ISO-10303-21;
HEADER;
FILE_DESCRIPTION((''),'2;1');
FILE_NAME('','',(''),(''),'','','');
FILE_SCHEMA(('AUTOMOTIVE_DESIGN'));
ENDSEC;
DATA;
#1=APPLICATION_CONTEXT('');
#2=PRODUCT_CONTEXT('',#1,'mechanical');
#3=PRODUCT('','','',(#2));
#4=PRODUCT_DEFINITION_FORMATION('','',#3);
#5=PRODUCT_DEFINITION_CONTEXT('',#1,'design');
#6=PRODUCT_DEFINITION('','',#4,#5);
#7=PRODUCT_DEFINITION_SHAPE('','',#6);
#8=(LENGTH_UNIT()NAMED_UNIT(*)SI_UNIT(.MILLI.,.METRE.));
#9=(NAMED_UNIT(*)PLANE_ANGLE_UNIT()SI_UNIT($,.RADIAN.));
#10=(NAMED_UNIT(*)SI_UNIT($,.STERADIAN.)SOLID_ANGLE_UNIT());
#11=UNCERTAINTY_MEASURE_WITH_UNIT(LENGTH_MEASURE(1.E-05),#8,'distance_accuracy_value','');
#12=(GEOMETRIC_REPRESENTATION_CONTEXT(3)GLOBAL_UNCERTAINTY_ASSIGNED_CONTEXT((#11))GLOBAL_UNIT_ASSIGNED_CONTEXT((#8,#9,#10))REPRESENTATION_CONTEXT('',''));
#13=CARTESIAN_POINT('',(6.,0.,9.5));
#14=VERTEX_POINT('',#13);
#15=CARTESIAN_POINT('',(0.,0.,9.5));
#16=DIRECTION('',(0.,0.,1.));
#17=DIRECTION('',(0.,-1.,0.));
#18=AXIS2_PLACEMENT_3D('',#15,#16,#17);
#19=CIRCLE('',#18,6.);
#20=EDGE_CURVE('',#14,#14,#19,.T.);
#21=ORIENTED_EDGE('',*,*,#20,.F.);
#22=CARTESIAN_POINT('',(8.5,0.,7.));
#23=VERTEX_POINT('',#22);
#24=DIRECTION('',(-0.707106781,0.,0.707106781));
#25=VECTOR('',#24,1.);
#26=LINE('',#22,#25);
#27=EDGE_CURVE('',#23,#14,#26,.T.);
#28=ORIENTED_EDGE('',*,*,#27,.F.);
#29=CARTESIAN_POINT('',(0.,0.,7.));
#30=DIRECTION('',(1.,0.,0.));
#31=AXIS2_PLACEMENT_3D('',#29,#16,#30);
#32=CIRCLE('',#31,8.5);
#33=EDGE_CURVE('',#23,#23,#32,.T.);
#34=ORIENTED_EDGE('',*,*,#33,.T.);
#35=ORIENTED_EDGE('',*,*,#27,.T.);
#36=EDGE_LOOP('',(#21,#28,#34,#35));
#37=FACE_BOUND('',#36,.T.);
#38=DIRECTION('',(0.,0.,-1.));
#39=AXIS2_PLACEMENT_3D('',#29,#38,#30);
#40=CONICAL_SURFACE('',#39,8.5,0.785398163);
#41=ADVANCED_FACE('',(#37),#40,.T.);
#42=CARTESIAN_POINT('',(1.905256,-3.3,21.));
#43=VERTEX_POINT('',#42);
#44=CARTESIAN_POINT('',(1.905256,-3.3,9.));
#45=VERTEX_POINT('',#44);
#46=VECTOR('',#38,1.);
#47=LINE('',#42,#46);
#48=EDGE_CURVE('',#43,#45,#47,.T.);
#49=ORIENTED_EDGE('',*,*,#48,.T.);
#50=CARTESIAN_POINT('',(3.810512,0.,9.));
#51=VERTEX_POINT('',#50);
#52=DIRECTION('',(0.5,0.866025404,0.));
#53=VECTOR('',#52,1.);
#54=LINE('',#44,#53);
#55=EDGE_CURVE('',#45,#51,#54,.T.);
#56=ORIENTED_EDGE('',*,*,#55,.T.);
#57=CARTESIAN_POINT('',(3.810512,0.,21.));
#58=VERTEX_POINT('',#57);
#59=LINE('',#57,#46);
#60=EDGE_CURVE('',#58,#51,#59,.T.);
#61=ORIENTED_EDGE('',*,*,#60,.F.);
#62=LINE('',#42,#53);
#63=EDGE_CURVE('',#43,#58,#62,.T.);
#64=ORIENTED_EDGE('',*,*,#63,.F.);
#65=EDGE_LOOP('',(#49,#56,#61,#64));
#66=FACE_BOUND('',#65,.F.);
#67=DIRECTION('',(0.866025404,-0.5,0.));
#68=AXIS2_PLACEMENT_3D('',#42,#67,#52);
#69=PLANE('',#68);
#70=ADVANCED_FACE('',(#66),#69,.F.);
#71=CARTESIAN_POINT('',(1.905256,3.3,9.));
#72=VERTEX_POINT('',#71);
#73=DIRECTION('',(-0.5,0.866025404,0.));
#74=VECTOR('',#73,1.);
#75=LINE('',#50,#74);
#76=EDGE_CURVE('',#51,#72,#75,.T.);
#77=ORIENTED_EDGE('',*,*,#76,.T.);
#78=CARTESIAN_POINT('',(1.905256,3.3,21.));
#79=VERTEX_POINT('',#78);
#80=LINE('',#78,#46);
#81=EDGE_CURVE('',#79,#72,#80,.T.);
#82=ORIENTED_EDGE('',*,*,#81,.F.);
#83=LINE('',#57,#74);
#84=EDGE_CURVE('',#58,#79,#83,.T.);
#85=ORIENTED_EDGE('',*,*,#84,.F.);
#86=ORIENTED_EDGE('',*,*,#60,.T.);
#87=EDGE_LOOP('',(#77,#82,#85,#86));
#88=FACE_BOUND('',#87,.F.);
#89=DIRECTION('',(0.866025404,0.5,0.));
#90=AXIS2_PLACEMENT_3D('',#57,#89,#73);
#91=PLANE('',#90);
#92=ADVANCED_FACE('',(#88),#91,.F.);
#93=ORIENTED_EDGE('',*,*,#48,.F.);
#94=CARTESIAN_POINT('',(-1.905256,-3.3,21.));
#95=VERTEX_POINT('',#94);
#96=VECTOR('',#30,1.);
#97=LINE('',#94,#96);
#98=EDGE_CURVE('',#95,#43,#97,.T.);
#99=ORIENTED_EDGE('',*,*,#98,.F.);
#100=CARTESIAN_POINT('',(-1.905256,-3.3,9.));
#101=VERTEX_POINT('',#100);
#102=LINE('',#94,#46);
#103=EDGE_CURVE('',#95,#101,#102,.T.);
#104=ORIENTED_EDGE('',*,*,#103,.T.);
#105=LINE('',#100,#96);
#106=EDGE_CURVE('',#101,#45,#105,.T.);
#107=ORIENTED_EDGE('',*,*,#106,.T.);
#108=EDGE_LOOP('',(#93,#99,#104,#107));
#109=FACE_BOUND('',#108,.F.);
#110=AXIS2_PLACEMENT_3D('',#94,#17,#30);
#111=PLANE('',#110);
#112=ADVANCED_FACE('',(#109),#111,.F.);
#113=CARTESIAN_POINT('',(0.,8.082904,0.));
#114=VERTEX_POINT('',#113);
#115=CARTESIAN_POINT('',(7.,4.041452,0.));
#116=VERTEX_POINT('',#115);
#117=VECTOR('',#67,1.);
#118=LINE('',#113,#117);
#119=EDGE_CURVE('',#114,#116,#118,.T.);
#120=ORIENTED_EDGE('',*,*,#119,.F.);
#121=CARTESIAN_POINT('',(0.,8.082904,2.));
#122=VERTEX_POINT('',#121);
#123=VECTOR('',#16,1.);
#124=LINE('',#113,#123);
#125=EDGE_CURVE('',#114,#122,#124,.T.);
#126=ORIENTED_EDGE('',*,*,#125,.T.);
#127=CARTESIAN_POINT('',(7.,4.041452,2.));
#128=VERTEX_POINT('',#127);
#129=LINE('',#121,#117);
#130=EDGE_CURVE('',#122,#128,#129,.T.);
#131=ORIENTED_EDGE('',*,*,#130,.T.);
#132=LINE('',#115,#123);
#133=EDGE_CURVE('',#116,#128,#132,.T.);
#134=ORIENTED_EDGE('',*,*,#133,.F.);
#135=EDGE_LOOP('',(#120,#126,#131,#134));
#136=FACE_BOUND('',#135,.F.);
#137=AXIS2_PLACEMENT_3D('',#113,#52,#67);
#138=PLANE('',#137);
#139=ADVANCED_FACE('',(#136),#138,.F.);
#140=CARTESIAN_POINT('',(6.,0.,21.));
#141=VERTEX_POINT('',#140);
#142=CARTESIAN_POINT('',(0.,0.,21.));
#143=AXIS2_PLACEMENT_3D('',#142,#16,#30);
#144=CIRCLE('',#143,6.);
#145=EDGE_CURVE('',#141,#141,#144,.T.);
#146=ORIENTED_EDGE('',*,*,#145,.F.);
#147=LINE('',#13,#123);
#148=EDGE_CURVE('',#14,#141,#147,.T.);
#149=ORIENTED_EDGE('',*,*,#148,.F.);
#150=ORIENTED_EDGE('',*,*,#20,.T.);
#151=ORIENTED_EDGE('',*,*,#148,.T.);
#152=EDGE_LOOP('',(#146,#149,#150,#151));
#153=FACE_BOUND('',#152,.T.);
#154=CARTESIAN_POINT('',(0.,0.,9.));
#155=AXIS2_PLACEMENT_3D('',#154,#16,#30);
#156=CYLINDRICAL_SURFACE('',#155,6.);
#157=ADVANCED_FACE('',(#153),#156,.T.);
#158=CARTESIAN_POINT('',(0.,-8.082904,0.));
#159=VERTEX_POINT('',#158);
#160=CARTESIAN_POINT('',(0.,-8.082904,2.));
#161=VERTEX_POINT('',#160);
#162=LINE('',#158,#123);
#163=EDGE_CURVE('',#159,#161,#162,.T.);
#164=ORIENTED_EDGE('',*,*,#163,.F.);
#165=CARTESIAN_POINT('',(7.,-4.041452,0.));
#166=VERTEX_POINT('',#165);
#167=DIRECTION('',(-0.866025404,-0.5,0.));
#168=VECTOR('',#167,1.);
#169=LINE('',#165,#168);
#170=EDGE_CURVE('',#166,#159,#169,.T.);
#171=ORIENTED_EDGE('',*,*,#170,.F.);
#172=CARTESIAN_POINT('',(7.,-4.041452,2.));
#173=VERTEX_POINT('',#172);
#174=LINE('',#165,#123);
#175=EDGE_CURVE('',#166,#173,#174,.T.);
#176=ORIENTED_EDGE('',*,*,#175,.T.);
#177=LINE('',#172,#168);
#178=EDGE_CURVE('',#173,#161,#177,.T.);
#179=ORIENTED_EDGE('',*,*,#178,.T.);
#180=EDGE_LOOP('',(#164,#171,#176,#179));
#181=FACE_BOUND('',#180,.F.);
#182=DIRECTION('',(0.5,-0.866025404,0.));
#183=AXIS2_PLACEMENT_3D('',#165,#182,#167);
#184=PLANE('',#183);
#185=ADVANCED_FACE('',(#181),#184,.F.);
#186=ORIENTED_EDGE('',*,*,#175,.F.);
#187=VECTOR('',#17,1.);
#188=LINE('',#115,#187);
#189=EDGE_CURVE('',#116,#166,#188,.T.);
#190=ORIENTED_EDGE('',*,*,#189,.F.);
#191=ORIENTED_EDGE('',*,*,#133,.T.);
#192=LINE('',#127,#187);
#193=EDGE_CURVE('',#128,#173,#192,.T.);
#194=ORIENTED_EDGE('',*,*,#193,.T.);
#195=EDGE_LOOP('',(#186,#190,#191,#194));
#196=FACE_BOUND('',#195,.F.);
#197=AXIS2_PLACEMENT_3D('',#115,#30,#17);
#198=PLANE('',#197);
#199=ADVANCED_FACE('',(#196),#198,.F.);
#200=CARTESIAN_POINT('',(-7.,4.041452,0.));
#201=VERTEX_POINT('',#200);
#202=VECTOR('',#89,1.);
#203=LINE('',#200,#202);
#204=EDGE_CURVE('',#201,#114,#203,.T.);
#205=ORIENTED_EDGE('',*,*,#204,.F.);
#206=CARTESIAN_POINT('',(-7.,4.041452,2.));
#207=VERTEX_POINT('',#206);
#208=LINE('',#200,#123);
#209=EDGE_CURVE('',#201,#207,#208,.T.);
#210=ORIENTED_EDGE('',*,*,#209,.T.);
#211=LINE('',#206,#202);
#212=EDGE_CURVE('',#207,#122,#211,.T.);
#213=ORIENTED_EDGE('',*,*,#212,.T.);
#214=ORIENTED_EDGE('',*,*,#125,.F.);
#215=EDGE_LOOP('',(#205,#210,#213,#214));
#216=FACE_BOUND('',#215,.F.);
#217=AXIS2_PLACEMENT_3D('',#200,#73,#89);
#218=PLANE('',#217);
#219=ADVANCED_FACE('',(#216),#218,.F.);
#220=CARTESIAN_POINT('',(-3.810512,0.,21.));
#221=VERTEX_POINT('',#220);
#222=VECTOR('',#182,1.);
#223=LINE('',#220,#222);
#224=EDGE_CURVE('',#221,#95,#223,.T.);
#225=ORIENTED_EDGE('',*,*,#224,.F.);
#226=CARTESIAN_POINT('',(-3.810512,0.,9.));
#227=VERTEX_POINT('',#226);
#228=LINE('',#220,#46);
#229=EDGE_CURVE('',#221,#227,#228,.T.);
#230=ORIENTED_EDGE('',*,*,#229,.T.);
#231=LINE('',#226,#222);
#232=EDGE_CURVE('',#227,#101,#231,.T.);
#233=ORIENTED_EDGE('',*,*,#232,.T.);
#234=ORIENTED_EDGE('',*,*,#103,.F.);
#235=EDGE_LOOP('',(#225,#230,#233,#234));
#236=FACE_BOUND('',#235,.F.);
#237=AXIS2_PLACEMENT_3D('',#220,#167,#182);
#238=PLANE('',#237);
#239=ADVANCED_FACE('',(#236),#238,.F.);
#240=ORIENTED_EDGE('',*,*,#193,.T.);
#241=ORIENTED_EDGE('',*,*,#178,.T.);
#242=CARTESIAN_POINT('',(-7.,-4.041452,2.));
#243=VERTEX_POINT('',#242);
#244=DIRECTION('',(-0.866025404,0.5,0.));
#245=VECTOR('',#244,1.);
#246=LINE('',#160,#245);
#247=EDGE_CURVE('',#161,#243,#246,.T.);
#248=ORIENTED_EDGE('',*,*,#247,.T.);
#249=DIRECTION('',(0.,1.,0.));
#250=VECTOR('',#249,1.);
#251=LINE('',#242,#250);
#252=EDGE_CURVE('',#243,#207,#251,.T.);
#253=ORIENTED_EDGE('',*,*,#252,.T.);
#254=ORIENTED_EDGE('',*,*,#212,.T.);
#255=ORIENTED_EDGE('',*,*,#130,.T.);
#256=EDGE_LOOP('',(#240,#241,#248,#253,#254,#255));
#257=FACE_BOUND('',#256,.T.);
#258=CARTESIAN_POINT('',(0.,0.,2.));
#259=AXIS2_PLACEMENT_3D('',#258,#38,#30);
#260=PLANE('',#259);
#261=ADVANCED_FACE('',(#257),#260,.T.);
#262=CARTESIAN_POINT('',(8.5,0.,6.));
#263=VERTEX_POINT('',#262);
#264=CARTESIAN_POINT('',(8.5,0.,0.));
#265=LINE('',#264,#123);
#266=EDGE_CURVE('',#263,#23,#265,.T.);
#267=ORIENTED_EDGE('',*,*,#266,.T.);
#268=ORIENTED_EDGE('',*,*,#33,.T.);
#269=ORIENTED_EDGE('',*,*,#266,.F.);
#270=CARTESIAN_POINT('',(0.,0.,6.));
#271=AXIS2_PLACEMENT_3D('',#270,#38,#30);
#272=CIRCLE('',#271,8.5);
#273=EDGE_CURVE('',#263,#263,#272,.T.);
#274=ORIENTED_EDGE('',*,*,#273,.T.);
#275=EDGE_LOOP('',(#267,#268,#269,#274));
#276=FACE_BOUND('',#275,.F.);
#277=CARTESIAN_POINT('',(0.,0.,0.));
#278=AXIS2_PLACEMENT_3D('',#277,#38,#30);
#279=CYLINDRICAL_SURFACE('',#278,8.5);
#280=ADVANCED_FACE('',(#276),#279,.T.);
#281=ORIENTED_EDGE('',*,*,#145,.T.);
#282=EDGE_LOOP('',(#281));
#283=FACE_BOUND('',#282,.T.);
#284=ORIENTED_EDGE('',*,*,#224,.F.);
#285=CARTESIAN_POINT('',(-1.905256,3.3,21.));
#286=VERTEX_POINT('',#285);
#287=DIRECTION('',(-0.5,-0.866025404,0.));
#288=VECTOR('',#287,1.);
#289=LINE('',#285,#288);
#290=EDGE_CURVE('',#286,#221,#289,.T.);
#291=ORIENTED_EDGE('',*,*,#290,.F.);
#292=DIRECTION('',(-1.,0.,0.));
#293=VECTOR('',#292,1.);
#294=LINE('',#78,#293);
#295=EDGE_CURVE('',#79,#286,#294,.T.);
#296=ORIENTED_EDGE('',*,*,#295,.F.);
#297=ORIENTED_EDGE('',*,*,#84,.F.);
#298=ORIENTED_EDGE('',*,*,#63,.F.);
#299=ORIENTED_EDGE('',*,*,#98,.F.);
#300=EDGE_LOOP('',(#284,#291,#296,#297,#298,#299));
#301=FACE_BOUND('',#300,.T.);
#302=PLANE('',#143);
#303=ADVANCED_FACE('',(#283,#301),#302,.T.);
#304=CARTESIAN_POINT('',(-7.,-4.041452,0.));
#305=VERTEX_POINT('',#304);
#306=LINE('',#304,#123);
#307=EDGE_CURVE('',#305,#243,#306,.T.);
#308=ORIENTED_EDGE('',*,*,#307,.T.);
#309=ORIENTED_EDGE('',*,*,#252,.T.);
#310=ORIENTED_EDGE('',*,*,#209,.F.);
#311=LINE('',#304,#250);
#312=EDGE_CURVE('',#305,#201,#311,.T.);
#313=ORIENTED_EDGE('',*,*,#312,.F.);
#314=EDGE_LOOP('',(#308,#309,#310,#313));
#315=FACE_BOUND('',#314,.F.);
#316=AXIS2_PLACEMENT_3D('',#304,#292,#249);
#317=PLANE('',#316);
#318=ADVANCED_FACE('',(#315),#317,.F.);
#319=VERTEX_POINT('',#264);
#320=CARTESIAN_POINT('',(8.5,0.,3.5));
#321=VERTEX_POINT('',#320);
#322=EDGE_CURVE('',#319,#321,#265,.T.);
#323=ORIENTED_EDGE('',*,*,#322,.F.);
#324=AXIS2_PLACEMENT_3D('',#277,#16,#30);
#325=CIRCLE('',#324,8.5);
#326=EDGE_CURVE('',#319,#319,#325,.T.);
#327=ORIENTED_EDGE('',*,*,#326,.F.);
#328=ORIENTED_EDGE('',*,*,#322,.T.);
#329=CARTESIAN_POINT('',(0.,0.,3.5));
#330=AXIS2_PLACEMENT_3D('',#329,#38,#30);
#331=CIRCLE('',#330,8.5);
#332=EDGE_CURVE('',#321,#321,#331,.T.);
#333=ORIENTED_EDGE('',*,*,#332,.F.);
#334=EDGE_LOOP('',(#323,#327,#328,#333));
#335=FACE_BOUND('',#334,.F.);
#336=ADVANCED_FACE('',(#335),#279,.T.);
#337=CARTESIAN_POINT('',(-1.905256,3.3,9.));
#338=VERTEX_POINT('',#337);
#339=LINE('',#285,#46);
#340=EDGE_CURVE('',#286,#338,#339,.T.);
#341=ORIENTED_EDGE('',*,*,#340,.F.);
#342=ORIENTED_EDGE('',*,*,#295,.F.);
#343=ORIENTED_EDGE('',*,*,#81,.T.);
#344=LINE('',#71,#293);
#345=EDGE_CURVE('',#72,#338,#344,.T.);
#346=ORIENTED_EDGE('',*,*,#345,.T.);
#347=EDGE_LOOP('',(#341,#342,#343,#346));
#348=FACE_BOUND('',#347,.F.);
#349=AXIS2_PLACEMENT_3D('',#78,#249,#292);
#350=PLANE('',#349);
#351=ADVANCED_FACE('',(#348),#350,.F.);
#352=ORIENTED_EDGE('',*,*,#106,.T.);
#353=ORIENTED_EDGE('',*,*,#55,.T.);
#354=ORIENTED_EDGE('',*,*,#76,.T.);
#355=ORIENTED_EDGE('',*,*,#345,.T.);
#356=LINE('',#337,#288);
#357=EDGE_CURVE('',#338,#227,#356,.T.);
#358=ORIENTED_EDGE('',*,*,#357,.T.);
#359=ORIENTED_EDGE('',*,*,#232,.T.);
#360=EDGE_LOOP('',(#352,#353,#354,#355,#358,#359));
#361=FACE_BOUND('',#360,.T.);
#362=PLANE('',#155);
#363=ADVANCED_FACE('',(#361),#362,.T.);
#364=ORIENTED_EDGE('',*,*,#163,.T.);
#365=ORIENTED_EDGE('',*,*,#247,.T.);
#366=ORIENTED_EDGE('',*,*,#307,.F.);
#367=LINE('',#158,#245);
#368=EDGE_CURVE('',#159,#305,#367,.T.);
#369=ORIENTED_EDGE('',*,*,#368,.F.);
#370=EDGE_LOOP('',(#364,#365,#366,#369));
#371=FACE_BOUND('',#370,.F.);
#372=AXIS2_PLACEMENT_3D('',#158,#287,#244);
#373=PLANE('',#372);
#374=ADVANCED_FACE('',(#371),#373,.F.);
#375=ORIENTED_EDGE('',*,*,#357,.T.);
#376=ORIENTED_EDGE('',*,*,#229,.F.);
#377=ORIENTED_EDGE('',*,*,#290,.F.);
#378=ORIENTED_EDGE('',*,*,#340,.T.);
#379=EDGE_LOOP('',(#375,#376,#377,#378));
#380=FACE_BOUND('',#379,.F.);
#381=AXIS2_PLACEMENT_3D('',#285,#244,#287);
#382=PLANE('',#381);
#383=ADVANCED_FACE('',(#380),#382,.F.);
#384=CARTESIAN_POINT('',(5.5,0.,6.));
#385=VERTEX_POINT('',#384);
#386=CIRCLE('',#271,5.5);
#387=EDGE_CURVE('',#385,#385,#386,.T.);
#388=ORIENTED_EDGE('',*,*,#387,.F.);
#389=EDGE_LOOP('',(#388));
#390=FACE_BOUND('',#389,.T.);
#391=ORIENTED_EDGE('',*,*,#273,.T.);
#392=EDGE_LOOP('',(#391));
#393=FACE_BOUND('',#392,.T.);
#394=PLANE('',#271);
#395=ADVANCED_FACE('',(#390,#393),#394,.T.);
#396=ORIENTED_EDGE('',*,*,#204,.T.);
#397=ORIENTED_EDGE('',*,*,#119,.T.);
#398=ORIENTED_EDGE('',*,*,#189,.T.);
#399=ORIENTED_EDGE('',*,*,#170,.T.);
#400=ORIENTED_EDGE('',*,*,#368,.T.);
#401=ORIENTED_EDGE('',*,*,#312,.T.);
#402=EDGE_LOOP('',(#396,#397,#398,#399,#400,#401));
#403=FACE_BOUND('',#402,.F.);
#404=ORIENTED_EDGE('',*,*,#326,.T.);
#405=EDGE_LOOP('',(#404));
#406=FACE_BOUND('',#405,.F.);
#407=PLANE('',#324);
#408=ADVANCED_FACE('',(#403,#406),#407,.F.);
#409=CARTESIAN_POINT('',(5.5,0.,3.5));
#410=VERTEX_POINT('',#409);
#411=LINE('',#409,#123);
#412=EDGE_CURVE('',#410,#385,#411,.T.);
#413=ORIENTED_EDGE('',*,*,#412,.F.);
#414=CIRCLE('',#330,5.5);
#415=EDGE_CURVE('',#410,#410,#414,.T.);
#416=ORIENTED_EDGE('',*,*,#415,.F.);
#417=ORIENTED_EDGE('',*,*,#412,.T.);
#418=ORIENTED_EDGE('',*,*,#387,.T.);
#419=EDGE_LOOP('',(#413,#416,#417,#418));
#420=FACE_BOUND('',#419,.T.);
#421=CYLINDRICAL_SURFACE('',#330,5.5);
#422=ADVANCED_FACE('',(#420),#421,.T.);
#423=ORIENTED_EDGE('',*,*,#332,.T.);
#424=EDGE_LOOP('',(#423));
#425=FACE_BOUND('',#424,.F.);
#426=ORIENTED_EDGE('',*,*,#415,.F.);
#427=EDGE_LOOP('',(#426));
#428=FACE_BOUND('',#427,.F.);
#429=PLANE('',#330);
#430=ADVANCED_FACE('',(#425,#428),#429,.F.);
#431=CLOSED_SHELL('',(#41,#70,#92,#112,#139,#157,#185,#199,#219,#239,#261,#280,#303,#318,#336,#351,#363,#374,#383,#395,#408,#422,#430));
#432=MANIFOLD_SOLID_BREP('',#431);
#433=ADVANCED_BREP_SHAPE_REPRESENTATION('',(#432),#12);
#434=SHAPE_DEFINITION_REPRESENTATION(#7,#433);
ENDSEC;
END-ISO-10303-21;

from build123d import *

# Parameters (mm, degrees)
F0_R        = 8.5
F1_DEPTH    = 11
F3_DEPTH    = 2
F5_R        = 8.5
F5_R_2      = 5.5
F6_DEPTH    = 2.5
F7_R        = 6
F8_DEPTH    = 10
F9_S5_R     = 6
F9_T6_DEPTH = 14
F11_DEPTH   = 12


# Not quite as in the source:
# - a fillet or chamfer that OpenCascade refuses, or shapes differently, is made with other operations: its cross-section is extruded or revolved along the edge and cut away or added


with BuildPart() as f1:
    # F0 (on Top) → F1 (new body)
    with BuildSketch(Plane.XY):
        Circle(F0_R)
    extrude(amount=F1_DEPTH)

    # F2 (on face) → F3 (cut)
    with BuildSketch(Plane(origin=(0, 0, 0), x_dir=(1, 0, 0), z_dir=(0, 0, -1))):
        Polygon((7, 4.0414518843), (0, 8.0829037687), (-7, 4.0414518843), (-7, -4.0414518843), (0, -8.0829037687), (7, -4.0414518843), align=None)
    extrude(amount=-F3_DEPTH, mode=Mode.SUBTRACT)

    # F5 (on offset) → F6 (cut)
    with BuildSketch(Plane(origin=(0, 0, 3.5), x_dir=(1, 0, 0), z_dir=(0, 0, -1))):
        Circle(F5_R)
        Circle(F5_R_2, mode=Mode.SUBTRACT)
    extrude(amount=-F6_DEPTH, mode=Mode.SUBTRACT)

    # F7 (on face) → F8 (join)
    with BuildSketch(Plane.XY.offset(11)):
        Circle(F7_R)
    extrude(amount=F8_DEPTH)

    # F9: chamfer of 4 on 1 edges, made by hand


with BuildPart() as f9_tool2:
    # F9_s3 → F9_t4 (revolve)
    with BuildSketch(Plane.XZ):
        Polygon((8.5, 7), (4.5, 11), (8.5, 11), align=None)
    revolve(axis=Axis((0, 0, 11), (0, 0, 1)))

    # F9_s5 → F9_t6 (cut, symmetric)
    with BuildSketch(Plane.XY.offset(9)):
        Circle(F9_S5_R)
    extrude(amount=F9_T6_DEPTH, both=True, mode=Mode.SUBTRACT)


with BuildPart() as f1_1:
    add(f1.part)

    # F9_t1: cut F9_tool2
    add(f9_tool2.part, mode=Mode.SUBTRACT)

    # F10 (on face) → F11 (cut)
    with BuildSketch(Plane.XY.offset(21)):
        Polygon((3.8105117767, 0), (1.9052558883, 3.3), (-1.9052558883, 3.3), (-3.8105117767, 0), (-1.9052558883, -3.3), (1.9052558883, -3.3), align=None)
    extrude(amount=-F11_DEPTH, mode=Mode.SUBTRACT)


solid = f1_1.part
